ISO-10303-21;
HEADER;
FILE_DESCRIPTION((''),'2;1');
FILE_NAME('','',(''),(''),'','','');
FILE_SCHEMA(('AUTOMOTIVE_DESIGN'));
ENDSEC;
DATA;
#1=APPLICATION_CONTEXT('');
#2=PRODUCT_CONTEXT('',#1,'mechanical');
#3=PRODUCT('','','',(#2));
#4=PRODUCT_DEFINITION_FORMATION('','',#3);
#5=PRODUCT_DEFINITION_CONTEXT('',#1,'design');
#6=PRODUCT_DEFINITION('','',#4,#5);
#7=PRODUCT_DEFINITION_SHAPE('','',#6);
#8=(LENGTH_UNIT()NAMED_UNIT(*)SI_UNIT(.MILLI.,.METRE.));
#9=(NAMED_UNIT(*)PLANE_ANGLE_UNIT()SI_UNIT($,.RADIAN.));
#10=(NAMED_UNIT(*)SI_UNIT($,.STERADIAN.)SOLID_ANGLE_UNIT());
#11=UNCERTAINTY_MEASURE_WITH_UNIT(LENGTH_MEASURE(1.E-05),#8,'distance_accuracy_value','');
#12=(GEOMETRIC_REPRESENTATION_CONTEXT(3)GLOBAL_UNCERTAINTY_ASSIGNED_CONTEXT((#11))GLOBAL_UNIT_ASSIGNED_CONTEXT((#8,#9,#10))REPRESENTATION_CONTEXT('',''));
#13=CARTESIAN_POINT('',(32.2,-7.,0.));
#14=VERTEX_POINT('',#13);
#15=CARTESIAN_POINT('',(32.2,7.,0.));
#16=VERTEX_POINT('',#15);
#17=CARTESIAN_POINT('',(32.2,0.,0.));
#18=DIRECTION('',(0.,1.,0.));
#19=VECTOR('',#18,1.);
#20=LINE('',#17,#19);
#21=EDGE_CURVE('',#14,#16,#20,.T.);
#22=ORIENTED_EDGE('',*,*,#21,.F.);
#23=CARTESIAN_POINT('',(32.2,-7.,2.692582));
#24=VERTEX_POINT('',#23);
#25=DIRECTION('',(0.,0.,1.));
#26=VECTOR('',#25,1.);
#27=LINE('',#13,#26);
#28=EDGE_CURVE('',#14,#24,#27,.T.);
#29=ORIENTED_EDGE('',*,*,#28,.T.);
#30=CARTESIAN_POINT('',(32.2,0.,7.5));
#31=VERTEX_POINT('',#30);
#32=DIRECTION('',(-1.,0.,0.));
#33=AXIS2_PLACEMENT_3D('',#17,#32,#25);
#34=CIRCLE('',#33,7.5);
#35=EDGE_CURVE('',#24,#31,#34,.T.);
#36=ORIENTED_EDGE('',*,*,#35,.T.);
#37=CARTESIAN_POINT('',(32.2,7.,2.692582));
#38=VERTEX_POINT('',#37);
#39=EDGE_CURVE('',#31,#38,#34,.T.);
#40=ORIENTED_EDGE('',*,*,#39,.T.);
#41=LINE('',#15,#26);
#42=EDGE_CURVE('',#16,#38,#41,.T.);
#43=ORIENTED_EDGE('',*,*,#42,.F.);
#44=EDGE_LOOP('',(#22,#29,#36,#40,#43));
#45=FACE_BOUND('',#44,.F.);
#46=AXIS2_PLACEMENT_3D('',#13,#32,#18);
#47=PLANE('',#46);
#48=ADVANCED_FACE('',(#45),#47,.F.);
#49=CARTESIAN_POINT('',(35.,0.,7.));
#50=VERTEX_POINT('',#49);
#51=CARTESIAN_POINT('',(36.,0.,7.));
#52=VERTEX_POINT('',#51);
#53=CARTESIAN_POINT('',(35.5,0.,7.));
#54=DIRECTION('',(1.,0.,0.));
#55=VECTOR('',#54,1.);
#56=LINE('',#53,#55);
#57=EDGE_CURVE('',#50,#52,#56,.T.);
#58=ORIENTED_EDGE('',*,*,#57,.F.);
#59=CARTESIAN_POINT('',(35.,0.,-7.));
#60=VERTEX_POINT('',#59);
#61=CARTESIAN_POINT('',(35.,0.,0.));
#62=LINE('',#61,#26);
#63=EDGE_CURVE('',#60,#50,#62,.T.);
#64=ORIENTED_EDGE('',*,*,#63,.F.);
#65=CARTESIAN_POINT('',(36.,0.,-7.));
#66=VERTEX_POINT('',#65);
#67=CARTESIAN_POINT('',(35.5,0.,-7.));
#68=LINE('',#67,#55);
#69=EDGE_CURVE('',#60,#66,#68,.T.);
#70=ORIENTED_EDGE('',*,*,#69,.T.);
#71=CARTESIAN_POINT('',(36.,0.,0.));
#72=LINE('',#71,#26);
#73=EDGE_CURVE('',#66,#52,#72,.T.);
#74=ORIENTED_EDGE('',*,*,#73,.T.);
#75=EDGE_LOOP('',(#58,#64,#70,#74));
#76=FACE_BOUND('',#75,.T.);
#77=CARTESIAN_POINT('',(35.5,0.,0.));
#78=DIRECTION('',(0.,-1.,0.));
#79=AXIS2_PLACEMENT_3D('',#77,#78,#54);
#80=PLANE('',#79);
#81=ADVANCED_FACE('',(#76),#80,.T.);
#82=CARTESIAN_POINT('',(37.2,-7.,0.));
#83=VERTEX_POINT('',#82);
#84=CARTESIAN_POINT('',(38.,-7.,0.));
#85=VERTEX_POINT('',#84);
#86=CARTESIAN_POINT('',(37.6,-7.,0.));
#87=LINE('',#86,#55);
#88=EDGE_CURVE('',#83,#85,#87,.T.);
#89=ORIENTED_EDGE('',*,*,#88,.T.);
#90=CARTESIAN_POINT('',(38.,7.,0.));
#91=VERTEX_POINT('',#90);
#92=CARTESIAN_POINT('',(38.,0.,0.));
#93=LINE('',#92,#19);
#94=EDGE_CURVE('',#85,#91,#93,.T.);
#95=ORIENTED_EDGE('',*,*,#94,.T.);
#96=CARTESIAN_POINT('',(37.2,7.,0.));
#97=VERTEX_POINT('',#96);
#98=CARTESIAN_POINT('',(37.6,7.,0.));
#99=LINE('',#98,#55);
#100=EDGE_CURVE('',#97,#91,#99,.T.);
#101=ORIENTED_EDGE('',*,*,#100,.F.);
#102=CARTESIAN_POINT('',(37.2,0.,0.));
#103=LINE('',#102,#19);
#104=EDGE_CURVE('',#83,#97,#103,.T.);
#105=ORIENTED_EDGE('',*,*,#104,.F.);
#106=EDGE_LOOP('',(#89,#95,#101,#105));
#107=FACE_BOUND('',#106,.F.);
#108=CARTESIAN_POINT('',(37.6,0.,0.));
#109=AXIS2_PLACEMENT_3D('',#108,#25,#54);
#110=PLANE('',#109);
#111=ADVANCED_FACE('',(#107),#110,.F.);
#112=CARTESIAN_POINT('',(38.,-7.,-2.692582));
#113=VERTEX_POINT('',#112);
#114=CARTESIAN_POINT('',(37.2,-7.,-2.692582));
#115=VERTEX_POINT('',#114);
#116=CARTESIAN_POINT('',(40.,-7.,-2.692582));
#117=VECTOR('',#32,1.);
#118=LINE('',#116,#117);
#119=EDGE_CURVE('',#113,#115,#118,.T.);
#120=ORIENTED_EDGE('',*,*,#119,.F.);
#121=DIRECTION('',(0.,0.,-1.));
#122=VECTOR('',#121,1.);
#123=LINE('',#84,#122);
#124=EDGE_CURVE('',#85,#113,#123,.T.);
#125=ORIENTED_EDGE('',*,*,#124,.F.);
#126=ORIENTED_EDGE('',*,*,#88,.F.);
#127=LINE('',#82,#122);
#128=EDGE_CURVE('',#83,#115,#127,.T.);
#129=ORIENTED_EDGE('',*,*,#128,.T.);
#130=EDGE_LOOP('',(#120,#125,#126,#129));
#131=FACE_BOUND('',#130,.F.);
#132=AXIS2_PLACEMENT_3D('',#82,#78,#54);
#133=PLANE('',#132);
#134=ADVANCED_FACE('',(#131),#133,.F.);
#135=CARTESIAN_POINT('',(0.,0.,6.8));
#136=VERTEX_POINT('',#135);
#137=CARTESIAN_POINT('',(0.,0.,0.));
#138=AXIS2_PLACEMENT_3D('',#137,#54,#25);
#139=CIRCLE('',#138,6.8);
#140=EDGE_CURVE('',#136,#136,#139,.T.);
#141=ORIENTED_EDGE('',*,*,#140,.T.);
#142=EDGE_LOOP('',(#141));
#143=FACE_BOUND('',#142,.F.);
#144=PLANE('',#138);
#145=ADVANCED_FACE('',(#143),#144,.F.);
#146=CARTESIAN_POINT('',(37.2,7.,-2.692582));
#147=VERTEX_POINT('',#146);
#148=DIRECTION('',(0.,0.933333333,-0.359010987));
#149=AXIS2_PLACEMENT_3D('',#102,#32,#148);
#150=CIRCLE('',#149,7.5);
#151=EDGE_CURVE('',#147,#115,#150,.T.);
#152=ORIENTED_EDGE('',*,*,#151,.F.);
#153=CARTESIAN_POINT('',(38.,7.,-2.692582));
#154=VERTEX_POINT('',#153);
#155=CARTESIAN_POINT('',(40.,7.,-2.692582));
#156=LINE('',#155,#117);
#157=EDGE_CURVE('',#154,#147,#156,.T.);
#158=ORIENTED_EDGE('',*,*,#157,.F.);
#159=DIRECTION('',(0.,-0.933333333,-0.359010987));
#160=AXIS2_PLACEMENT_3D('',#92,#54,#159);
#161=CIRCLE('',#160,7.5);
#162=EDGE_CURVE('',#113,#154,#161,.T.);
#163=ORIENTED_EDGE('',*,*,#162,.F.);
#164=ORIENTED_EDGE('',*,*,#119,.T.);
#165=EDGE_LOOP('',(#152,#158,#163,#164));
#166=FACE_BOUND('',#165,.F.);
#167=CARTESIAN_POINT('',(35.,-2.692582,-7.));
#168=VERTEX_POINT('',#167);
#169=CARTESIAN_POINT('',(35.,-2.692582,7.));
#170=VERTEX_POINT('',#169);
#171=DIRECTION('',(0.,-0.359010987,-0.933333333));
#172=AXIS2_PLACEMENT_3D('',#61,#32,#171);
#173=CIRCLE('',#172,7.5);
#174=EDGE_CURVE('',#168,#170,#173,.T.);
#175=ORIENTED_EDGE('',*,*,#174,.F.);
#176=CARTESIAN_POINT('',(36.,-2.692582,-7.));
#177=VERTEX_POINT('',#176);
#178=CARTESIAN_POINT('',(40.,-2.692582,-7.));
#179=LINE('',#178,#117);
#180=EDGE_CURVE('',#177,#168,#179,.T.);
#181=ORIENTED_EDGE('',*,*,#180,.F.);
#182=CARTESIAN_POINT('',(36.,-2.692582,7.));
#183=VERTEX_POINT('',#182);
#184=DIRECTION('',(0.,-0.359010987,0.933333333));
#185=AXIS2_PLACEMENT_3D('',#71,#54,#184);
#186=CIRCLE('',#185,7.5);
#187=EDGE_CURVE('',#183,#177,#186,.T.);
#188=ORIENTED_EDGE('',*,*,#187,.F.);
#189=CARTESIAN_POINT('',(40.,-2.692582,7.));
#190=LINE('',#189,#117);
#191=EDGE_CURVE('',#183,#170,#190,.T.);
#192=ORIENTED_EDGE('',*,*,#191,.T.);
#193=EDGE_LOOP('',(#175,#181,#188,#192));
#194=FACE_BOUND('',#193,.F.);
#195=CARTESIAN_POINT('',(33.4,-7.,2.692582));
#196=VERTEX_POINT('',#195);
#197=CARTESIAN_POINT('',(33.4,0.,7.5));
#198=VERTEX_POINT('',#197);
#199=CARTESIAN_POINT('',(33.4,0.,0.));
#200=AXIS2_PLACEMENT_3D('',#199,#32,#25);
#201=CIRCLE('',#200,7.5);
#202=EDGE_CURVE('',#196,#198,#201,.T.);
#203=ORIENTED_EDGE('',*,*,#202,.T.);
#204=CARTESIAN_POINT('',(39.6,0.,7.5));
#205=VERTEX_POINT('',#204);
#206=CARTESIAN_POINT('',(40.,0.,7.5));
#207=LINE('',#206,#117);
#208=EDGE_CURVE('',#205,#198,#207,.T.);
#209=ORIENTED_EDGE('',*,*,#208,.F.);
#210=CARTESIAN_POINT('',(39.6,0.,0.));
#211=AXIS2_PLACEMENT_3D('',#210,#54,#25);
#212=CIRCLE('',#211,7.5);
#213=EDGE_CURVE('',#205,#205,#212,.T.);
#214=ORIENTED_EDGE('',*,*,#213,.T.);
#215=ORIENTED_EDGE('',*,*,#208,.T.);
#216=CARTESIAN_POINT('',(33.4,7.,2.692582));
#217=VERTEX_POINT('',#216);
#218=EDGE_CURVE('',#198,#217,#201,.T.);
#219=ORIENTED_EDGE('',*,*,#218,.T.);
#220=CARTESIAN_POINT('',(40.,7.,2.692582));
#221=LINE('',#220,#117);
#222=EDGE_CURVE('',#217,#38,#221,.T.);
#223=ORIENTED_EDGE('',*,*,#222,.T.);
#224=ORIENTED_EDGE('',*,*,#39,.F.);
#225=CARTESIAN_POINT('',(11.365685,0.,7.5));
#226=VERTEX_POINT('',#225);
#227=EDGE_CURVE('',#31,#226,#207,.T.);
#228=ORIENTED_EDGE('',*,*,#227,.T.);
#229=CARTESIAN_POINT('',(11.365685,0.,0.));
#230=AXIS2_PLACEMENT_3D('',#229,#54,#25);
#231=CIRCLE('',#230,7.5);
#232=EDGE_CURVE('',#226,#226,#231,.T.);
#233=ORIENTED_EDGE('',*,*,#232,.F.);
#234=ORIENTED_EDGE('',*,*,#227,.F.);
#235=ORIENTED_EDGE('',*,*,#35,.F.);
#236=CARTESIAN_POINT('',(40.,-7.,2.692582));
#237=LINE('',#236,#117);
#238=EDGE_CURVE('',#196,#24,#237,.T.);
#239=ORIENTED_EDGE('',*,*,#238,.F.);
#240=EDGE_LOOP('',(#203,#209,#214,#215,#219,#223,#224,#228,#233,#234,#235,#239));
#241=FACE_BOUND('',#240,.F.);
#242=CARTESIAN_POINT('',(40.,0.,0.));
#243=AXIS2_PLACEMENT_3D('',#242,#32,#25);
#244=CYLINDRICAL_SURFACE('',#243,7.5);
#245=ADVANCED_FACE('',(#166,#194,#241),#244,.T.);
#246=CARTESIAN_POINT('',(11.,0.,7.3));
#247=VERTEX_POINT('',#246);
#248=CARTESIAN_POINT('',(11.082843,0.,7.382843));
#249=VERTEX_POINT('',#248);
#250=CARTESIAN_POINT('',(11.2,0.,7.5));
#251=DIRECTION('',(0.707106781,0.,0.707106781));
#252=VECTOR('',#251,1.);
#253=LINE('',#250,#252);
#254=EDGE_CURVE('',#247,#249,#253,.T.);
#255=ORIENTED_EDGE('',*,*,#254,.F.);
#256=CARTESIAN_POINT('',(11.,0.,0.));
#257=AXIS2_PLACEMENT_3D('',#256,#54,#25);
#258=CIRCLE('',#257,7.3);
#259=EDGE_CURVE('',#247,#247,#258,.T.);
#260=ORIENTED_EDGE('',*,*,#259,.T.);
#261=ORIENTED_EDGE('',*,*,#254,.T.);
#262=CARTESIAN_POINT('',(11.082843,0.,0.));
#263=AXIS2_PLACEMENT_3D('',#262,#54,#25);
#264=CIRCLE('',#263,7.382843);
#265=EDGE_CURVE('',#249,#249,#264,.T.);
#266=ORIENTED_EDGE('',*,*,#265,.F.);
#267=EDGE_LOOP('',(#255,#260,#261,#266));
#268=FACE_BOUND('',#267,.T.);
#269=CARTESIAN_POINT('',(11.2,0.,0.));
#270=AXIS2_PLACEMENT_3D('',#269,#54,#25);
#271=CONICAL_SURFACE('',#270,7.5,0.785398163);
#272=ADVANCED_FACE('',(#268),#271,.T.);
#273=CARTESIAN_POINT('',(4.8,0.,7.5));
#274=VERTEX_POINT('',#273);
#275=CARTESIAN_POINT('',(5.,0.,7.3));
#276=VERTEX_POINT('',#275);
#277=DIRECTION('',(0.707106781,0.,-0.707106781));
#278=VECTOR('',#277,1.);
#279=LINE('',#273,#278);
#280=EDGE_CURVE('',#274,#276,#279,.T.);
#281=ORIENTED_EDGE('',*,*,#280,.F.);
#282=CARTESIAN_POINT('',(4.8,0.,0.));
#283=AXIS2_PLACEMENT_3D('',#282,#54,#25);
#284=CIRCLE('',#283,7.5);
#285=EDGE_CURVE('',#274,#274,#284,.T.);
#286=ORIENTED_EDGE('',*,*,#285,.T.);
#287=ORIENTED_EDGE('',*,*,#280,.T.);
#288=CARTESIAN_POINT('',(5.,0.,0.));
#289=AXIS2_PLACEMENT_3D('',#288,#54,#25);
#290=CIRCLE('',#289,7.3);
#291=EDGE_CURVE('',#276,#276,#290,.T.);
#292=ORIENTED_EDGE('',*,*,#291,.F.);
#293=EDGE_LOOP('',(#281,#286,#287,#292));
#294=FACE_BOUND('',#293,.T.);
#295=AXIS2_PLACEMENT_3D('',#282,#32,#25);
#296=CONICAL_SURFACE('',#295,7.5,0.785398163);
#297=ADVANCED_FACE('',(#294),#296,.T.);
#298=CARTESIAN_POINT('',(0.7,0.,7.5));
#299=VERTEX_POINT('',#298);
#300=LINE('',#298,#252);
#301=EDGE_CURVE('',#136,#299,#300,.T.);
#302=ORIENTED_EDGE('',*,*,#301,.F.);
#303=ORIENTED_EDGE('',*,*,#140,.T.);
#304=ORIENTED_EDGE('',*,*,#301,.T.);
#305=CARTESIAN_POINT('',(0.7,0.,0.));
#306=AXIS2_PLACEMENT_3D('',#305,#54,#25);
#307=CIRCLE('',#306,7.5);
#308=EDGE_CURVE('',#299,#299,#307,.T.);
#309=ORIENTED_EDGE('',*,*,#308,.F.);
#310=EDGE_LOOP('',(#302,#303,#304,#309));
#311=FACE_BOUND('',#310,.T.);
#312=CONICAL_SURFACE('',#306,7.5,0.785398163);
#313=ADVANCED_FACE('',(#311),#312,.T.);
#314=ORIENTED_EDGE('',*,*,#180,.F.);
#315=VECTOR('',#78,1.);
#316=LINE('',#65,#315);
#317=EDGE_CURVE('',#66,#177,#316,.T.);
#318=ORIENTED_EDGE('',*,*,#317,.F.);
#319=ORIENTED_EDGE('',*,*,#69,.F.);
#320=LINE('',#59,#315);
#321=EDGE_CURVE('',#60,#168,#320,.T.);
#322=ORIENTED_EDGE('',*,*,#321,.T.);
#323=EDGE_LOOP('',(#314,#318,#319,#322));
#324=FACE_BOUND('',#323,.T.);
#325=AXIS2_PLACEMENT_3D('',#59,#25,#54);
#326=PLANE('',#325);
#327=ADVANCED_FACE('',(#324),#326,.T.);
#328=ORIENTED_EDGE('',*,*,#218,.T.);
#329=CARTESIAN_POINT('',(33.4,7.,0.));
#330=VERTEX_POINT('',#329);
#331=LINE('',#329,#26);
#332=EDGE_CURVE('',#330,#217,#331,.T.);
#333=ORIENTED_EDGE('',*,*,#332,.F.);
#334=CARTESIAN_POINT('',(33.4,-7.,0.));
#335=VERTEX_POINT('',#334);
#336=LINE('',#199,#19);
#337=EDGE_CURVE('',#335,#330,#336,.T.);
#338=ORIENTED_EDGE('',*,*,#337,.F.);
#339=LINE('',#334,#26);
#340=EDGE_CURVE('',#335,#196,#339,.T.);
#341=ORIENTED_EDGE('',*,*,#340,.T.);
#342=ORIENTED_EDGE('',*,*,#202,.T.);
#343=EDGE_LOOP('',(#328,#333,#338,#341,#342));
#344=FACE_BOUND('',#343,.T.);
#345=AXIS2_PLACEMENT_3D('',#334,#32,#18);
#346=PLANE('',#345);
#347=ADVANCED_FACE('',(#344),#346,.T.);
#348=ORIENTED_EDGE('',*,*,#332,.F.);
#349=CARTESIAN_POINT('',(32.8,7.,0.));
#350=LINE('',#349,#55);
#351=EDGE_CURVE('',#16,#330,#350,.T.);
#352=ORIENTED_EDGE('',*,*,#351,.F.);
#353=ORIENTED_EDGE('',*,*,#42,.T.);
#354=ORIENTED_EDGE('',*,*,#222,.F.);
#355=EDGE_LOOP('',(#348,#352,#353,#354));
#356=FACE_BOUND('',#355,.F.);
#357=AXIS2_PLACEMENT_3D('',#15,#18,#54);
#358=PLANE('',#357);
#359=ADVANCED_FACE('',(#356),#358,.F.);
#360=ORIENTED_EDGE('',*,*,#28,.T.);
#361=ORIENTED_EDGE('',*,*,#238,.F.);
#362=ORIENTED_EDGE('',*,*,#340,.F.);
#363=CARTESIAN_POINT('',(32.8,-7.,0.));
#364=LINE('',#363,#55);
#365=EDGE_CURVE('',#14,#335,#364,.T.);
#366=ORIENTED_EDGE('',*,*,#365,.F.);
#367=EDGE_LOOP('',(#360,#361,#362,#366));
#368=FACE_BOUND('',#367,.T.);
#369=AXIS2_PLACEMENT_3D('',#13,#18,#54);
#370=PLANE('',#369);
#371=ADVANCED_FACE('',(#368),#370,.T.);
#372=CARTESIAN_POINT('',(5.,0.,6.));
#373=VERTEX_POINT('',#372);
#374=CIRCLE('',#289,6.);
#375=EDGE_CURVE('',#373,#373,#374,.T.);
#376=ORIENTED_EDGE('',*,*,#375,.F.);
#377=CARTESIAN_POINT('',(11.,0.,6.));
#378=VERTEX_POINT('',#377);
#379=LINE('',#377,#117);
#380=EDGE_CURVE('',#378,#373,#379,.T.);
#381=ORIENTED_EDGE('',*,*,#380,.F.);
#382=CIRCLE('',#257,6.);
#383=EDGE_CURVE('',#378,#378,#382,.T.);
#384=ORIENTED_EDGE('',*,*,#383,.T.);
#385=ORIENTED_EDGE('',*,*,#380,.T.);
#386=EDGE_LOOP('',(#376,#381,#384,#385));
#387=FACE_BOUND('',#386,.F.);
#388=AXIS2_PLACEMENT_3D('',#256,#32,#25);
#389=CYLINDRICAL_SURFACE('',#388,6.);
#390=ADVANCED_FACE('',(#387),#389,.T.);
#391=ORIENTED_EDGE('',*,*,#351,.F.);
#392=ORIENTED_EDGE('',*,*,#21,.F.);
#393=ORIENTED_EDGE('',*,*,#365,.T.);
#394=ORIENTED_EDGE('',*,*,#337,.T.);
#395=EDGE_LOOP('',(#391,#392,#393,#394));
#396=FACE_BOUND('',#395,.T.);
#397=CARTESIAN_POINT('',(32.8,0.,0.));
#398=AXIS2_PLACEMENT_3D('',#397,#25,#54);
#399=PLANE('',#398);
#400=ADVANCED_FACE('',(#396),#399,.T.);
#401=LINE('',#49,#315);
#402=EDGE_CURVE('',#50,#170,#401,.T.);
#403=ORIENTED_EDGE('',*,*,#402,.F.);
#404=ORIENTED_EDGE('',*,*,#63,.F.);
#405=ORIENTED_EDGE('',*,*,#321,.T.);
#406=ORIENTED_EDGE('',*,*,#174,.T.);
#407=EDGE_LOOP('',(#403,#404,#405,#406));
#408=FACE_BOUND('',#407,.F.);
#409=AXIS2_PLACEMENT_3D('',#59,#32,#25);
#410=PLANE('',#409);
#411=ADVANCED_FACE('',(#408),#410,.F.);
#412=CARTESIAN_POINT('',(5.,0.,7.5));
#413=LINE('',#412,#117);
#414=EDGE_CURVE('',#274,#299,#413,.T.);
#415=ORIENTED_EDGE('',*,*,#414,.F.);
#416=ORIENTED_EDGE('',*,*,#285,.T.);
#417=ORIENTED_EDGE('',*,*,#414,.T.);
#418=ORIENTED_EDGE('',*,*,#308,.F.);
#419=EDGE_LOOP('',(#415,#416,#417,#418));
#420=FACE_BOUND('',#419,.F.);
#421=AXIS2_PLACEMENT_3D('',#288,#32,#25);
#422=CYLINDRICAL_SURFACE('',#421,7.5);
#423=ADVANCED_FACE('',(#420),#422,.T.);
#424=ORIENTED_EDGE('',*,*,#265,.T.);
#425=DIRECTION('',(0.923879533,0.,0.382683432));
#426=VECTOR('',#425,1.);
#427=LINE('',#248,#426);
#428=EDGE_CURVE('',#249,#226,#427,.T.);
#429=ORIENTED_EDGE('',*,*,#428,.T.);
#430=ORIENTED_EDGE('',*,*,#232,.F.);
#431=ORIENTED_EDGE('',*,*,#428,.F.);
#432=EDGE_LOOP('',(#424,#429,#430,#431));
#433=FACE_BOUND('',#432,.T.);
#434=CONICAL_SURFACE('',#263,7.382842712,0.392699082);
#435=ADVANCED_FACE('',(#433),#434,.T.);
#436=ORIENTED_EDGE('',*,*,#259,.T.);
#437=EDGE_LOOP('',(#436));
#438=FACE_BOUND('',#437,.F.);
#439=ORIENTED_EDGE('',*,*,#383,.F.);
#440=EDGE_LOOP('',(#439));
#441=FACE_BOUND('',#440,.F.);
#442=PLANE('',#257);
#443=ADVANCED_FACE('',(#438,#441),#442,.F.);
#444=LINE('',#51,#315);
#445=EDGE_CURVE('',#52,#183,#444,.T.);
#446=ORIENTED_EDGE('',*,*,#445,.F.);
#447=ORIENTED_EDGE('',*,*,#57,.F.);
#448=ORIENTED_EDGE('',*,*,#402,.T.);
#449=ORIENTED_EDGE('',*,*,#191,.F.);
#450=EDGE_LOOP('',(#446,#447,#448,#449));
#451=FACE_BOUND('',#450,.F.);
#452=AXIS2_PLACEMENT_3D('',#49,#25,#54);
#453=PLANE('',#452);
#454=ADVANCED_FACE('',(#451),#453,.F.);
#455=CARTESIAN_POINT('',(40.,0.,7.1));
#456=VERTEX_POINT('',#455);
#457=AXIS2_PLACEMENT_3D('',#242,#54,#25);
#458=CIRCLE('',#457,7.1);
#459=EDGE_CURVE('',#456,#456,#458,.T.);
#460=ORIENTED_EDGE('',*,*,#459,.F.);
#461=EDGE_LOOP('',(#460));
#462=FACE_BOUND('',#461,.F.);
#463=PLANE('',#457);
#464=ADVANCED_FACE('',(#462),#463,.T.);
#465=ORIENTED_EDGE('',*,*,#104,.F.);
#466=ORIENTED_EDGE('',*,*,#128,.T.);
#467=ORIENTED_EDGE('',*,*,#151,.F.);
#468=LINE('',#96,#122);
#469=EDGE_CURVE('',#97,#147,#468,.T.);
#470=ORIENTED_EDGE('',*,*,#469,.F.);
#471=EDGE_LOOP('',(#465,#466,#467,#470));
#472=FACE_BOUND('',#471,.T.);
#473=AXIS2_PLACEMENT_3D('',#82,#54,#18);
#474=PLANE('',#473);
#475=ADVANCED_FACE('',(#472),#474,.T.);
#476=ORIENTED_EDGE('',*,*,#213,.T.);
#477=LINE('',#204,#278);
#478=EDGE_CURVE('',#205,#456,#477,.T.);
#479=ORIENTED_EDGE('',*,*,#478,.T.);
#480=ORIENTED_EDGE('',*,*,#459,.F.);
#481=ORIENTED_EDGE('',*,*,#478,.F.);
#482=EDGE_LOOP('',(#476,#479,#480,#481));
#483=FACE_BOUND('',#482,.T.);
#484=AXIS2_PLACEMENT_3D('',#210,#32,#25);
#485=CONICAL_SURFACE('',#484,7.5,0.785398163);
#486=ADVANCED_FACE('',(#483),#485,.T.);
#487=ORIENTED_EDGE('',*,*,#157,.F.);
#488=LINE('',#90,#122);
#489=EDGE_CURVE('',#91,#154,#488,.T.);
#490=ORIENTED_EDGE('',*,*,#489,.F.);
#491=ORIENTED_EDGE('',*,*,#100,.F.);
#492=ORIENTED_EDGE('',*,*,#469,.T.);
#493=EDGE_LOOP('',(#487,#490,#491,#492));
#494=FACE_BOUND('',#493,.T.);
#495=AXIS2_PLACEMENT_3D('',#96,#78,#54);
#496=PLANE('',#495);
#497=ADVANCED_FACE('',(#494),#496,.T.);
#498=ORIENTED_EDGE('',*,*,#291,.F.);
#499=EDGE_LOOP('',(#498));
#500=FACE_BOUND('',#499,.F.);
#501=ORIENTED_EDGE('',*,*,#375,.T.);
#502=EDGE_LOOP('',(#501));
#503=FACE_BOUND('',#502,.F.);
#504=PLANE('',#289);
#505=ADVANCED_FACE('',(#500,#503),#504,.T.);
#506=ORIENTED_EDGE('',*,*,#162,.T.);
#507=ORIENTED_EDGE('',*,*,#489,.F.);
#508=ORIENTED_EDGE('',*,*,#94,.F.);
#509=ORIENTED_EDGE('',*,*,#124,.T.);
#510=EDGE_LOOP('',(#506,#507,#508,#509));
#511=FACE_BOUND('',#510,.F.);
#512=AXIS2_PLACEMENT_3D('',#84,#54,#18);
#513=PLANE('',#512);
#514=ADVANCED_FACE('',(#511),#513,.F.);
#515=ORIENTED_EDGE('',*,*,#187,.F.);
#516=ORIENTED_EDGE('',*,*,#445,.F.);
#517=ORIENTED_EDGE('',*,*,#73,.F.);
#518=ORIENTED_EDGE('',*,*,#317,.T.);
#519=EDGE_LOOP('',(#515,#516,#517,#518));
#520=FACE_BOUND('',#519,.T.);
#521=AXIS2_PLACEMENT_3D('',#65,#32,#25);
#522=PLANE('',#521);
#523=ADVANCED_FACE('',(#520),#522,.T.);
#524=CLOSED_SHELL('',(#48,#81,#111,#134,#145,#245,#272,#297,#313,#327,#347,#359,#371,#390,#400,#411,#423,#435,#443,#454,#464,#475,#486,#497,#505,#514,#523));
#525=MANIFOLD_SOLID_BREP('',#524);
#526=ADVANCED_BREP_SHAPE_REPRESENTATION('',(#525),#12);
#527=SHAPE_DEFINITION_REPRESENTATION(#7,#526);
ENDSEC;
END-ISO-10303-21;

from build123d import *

# Parameters (mm, degrees)
F2_SIZE   = 0.7
F3_SIZE   = 0.2
F4_W      = 1
F4_H      = 14
F6_DEPTH  = 7.5
F7_W      = 1.2
F7_H      = 14
F8_DEPTH  = 7.5
F9_W      = 0.8
F9_H      = 14
F10_DEPTH = 7.5


# Not quite as in the source:
# - a fillet or chamfer that OpenCascade refuses, or shapes differently, is made with other operations: its cross-section is extruded or revolved along the edge and cut away or added


with BuildPart() as f1:
    # F0 (on Front) → F1 (revolve)
    with BuildSketch(Plane.XZ):
        Polygon((0, 7.5), (0, 0), (40, 0), (40, 7.5), (11, 7.5), (11, 6), (5, 6), (5, 7.5), align=None)
    revolve(axis=Axis((20, 0, 0), (1, 0, 0)))

    # F2
    f2_edges = [f1.edges().sort_by_distance(p)[0] for p in [
        (0, 0, -7.5),
    ]]
    chamfer(f2_edges, length=F2_SIZE)

    # F3
    f3_edges = [f1.edges().sort_by_distance(p)[0] for p in [
        (5, 0, -7.5),
        (11, 0, -7.5),
    ]]
    chamfer(f3_edges, length=F3_SIZE)

    # F5: chamfer of 0.4 on 3 edges, made by hand

    # F5_s1 → F5_t2 (revolve, cut)
    with BuildSketch(Plane.XZ):
        Polygon((11.0828427125, 7.3828427125), (11.3656854249, 7.5), (11.2, 7.5), align=None)
    revolve(axis=Axis((11.2, 0, 0), (1, 0, 0)), mode=Mode.SUBTRACT)

    # F5_s3 → F5_t4 (revolve, cut)
    with BuildSketch(Plane.XZ):
        Polygon((39.6, 7.5), (40, 7.1), (40, 7.5), align=None)
    revolve(axis=Axis((40, 0, 0), (1, 0, 0)), mode=Mode.SUBTRACT)

    # F4 (on Front) → F6 (cut)
    with BuildSketch(Plane.XZ):
        with Locations((35.5, 0)):
            Rectangle(F4_W, F4_H)
    extrude(amount=F6_DEPTH, mode=Mode.SUBTRACT)

    # F7 (on Top) → F8 (cut)
    with BuildSketch(Plane.XY):
        with Locations((32.8, 0)):
            Rectangle(F7_W, F7_H)
    extrude(amount=F8_DEPTH, mode=Mode.SUBTRACT)

    # F9 (on Top) → F10 (cut)
    with BuildSketch(Plane.XY):
        with Locations((37.6, 0)):
            Rectangle(F9_W, F9_H)
    extrude(amount=-F10_DEPTH, mode=Mode.SUBTRACT)


solid = f1.part
